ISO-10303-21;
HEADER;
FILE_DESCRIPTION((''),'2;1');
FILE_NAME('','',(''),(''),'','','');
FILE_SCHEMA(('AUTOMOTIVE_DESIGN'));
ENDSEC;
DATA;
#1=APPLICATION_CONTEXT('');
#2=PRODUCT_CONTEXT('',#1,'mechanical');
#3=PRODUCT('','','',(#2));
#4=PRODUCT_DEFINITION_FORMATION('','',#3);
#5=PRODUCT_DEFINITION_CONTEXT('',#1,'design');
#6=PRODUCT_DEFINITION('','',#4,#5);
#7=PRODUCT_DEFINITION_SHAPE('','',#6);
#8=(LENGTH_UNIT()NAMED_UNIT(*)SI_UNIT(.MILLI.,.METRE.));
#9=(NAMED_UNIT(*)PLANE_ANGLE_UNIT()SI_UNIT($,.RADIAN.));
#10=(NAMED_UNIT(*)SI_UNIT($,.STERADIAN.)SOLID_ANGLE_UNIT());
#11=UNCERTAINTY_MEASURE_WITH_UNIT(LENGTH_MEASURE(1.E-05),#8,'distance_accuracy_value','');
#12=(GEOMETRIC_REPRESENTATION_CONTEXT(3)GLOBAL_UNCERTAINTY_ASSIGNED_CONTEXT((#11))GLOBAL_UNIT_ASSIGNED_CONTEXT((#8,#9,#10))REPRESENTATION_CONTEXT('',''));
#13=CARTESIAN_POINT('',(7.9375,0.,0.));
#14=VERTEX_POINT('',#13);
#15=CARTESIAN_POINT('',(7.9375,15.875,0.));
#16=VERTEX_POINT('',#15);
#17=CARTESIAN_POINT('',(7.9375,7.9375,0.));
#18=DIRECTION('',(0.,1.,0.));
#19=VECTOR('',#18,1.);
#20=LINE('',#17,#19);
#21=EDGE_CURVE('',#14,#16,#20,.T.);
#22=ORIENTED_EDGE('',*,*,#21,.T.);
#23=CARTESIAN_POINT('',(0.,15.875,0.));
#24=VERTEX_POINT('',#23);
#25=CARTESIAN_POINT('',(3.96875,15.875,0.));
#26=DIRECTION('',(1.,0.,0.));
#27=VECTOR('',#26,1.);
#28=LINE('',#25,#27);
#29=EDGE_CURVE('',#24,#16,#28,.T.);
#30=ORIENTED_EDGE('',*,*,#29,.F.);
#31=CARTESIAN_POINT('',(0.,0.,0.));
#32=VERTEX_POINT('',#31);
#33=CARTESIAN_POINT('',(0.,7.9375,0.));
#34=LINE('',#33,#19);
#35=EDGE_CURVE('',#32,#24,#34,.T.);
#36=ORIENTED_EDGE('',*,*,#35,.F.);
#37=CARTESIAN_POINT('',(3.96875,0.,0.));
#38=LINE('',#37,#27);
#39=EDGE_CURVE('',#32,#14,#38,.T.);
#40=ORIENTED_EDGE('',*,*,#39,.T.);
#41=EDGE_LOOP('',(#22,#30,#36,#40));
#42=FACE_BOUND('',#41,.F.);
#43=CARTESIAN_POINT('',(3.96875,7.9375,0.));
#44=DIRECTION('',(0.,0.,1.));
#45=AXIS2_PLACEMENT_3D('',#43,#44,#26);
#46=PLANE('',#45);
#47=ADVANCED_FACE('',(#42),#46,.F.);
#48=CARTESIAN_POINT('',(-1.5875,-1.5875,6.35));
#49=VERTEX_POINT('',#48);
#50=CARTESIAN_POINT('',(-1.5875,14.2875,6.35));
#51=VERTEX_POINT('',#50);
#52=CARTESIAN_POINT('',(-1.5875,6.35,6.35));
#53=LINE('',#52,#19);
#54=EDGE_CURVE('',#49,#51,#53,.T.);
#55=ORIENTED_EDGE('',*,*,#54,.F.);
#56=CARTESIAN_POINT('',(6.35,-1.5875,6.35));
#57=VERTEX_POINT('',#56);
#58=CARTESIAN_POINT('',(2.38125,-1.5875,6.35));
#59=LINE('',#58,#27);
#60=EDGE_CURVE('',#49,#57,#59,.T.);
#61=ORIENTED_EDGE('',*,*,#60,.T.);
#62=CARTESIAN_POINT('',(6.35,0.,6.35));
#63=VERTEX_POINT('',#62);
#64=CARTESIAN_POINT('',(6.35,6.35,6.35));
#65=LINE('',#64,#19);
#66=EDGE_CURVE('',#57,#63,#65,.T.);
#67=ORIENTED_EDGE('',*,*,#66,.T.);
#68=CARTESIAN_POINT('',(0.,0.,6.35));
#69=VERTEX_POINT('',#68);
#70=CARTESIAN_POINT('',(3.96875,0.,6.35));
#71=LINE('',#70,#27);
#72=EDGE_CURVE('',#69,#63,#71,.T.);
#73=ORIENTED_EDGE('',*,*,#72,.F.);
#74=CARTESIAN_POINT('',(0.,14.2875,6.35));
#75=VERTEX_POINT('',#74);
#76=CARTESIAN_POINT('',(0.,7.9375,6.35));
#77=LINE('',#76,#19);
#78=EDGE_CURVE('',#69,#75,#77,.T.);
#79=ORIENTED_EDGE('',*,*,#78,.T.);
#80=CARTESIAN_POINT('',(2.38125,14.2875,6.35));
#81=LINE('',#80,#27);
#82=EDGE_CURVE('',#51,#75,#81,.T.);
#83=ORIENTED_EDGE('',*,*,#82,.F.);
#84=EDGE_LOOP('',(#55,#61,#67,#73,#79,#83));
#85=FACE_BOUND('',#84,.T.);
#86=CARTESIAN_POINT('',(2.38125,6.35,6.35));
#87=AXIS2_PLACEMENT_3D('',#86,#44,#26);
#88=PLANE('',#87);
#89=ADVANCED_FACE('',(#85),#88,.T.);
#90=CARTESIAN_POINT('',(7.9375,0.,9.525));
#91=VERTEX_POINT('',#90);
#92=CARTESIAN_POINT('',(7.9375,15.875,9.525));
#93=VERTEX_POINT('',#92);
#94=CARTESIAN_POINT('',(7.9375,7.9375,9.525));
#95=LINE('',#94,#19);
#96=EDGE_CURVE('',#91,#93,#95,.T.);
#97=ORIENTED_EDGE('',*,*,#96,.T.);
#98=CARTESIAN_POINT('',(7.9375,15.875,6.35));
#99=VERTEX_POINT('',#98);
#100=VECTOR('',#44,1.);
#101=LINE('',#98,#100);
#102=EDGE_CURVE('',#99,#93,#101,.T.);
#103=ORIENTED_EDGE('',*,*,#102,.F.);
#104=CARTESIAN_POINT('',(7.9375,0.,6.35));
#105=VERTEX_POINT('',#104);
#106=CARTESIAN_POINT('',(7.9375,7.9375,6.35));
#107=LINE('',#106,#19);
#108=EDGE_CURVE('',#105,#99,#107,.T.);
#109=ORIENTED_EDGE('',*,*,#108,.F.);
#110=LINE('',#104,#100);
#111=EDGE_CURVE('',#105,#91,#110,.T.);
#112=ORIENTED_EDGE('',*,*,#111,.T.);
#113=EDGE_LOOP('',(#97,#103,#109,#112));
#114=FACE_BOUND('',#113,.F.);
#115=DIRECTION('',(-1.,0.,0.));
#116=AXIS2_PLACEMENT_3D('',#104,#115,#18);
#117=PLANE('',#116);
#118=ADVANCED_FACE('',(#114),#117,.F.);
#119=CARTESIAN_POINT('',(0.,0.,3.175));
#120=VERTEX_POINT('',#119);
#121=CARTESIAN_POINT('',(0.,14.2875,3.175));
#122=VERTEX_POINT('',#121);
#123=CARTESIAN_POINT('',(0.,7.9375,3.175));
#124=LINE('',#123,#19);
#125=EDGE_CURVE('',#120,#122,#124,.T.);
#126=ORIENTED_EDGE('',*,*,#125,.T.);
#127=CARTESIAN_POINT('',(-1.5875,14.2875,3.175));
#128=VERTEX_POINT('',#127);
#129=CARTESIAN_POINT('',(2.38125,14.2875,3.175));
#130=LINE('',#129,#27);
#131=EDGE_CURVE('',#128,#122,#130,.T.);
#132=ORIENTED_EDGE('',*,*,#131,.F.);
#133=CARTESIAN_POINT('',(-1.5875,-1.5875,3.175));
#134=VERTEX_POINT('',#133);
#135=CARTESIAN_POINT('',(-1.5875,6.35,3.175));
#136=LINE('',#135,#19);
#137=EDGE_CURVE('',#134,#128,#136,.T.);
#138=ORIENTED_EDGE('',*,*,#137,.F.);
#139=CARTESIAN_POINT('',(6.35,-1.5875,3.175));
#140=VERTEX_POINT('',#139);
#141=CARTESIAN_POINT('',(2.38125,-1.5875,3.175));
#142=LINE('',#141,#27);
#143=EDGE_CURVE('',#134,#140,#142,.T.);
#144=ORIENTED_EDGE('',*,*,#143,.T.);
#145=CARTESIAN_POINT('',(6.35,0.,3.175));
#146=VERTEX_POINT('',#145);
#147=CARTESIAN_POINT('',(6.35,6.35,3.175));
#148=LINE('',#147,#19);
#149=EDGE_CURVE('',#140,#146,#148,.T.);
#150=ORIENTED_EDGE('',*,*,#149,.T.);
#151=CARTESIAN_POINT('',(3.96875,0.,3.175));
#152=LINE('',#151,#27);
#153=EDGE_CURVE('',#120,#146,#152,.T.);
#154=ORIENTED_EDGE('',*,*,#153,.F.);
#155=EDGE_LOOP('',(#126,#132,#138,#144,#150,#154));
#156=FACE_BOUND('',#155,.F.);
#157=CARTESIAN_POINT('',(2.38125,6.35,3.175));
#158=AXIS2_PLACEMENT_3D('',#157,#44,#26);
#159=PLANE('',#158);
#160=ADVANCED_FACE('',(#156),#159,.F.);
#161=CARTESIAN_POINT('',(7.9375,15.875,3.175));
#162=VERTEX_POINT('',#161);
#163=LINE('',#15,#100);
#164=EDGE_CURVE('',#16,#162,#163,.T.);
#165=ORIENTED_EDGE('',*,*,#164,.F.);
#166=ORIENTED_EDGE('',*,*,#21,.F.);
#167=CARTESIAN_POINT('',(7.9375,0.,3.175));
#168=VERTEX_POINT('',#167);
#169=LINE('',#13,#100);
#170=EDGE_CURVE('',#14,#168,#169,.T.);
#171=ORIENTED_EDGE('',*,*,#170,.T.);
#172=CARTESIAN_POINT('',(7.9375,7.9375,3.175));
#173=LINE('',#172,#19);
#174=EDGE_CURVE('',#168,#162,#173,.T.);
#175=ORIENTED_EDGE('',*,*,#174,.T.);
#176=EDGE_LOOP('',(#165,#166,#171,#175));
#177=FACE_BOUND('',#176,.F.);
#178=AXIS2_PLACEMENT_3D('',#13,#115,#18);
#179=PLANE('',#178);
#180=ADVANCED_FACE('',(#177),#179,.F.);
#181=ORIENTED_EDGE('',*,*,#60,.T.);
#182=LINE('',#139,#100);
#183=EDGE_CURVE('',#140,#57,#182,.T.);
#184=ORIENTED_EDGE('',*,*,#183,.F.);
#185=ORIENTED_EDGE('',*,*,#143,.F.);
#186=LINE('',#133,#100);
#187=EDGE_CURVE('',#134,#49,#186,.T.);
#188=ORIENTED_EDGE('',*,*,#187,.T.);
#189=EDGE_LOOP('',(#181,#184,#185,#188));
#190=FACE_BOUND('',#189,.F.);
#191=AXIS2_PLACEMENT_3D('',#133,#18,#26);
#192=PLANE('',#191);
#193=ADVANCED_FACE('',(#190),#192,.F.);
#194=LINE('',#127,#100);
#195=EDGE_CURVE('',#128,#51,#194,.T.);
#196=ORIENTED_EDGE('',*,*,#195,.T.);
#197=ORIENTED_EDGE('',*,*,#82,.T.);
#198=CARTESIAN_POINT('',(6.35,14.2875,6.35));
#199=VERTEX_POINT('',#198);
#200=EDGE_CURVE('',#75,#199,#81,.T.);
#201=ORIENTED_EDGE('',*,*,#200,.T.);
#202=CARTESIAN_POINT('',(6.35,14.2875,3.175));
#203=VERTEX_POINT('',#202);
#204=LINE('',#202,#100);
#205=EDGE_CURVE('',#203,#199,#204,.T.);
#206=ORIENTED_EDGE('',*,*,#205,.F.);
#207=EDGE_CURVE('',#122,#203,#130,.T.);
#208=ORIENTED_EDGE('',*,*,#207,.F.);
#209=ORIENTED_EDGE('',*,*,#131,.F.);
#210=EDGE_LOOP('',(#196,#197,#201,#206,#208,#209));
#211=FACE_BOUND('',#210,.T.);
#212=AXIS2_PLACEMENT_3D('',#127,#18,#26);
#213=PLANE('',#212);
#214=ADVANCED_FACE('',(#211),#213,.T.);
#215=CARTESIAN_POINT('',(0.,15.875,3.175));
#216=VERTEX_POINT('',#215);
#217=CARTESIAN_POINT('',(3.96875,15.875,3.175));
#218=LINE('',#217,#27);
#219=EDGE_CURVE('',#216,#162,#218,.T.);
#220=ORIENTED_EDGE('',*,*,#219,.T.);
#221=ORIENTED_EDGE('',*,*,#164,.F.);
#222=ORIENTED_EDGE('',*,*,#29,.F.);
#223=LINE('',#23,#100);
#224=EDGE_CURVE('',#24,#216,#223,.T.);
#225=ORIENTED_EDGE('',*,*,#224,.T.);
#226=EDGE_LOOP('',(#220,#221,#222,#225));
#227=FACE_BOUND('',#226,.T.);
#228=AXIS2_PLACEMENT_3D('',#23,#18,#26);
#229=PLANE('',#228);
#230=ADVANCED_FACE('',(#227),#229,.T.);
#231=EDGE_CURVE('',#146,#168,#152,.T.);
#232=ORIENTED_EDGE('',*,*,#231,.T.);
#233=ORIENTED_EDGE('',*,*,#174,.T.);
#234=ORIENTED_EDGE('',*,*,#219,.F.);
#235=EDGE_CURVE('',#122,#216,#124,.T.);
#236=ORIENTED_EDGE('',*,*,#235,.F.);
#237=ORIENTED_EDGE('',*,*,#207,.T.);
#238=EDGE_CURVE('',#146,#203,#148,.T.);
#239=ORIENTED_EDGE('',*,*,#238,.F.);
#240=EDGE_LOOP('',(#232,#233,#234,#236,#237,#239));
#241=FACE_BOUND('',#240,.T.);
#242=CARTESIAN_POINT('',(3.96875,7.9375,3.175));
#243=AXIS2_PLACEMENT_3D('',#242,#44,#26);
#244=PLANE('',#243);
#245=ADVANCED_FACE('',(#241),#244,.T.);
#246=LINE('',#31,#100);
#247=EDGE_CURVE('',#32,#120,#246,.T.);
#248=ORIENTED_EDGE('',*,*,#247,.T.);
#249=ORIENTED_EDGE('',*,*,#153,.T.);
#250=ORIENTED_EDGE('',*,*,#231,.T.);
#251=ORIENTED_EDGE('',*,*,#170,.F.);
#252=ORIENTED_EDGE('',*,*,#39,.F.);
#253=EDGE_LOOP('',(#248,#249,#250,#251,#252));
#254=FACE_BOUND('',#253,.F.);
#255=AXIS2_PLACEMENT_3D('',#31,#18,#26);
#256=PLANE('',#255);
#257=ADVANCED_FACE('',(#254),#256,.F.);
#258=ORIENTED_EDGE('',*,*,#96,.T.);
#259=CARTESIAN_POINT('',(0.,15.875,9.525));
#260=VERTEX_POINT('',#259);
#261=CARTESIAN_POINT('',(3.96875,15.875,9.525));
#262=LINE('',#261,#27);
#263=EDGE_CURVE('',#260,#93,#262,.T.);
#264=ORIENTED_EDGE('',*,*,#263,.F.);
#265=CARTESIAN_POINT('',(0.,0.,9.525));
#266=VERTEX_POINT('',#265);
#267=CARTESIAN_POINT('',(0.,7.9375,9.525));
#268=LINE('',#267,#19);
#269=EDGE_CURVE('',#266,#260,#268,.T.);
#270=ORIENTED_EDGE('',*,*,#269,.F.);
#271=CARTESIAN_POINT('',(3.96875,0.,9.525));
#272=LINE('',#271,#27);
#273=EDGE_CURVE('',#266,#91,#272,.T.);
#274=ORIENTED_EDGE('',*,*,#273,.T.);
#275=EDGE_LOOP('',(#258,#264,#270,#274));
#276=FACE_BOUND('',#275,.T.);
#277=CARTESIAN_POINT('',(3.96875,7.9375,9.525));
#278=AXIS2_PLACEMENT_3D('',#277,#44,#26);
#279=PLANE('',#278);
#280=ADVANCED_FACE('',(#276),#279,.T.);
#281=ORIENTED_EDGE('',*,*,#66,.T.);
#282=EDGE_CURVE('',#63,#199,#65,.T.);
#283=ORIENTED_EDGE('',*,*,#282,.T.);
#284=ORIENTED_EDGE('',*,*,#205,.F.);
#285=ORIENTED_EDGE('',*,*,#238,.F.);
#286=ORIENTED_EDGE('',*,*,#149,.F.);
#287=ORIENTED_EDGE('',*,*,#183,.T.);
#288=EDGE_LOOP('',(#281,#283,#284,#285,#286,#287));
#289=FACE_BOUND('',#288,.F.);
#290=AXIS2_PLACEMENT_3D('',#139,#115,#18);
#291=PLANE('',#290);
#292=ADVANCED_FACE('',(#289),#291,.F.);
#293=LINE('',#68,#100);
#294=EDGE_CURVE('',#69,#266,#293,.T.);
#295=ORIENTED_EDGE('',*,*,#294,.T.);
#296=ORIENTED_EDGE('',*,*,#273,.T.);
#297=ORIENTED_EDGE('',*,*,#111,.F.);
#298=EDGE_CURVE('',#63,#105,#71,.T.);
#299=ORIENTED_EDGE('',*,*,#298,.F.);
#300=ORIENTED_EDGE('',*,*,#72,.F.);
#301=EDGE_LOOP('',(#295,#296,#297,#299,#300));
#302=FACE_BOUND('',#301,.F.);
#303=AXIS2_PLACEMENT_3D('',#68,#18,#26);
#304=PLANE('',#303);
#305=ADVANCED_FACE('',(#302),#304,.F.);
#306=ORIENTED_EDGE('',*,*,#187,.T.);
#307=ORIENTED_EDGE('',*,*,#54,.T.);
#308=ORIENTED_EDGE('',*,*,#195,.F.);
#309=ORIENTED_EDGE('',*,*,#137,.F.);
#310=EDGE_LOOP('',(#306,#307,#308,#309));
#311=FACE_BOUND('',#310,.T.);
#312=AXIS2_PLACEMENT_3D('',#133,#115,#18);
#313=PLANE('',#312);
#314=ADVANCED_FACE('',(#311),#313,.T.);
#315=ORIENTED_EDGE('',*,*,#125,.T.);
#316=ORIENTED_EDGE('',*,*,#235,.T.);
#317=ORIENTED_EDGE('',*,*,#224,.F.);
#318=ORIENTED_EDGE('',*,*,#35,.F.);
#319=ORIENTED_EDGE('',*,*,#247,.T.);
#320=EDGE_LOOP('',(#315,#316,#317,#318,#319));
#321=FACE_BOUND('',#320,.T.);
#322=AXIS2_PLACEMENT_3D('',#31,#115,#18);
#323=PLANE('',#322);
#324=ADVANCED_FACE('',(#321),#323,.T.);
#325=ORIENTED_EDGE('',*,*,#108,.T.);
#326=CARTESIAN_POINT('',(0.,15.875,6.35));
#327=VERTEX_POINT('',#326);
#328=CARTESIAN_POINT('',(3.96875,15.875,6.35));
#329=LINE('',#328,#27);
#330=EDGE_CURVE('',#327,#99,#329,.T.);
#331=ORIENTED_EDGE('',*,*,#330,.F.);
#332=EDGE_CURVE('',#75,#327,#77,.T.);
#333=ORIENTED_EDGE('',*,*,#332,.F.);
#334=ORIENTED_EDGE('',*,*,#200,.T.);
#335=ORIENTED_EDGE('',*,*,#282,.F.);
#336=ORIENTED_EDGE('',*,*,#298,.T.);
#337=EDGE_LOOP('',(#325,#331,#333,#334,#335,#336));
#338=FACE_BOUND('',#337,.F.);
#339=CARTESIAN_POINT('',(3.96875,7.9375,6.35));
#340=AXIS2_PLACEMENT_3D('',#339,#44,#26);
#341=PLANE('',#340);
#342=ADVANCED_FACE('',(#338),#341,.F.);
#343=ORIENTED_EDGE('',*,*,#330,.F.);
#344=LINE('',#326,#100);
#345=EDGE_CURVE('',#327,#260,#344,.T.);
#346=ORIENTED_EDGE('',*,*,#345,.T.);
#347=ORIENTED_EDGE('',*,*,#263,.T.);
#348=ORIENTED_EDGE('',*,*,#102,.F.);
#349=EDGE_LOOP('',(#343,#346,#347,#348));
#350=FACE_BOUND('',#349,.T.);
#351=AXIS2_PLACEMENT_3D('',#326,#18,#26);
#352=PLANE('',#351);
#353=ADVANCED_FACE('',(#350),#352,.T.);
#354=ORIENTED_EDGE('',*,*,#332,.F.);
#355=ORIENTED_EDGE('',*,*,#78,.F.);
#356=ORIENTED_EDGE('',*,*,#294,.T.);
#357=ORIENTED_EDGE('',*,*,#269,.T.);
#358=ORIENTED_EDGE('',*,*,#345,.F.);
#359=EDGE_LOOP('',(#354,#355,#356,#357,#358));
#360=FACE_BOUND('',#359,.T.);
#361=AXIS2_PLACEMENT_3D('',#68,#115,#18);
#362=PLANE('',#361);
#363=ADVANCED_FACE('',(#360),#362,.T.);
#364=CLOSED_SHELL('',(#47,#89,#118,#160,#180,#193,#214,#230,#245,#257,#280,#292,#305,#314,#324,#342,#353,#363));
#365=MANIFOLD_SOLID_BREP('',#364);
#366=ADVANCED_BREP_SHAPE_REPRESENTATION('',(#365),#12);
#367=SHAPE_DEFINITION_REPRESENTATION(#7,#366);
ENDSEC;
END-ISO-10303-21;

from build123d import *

# Parameters (mm, degrees)
F2_W     = 7.9375
F2_H     = 15.875
F3_DEPTH = 3.175
F4_W     = 7.9375
F4_H     = 15.875
F5_DEPTH = 3.175
F6_W     = 7.9375
F6_H     = 15.875
F7_DEPTH = 3.175


# Not quite as in the source:
# - a variable given as a bare number and used for a length is read in inches; the dataset says mm whatever the document's units were


with BuildPart() as f3:
    # F2 (on Top) → F3 (new body)
    with BuildSketch(Plane.XY):
        with Locations((3.96875, 7.9375)):
            Rectangle(F2_W, F2_H)
    extrude(amount=F3_DEPTH)

    # F4 (on face) → F5 (join)
    with BuildSketch(Plane.XY.offset(3.175)):
        with Locations((2.38125, 6.35)):
            Rectangle(F4_W, F4_H)
    extrude(amount=F5_DEPTH)

    # F6 (on face) → F7 (join)
    with BuildSketch(Plane.XY.offset(6.35)):
        with Locations((3.96875, 7.9375)):
            Rectangle(F6_W, F6_H)
    extrude(amount=F7_DEPTH)


solid = f3.part
